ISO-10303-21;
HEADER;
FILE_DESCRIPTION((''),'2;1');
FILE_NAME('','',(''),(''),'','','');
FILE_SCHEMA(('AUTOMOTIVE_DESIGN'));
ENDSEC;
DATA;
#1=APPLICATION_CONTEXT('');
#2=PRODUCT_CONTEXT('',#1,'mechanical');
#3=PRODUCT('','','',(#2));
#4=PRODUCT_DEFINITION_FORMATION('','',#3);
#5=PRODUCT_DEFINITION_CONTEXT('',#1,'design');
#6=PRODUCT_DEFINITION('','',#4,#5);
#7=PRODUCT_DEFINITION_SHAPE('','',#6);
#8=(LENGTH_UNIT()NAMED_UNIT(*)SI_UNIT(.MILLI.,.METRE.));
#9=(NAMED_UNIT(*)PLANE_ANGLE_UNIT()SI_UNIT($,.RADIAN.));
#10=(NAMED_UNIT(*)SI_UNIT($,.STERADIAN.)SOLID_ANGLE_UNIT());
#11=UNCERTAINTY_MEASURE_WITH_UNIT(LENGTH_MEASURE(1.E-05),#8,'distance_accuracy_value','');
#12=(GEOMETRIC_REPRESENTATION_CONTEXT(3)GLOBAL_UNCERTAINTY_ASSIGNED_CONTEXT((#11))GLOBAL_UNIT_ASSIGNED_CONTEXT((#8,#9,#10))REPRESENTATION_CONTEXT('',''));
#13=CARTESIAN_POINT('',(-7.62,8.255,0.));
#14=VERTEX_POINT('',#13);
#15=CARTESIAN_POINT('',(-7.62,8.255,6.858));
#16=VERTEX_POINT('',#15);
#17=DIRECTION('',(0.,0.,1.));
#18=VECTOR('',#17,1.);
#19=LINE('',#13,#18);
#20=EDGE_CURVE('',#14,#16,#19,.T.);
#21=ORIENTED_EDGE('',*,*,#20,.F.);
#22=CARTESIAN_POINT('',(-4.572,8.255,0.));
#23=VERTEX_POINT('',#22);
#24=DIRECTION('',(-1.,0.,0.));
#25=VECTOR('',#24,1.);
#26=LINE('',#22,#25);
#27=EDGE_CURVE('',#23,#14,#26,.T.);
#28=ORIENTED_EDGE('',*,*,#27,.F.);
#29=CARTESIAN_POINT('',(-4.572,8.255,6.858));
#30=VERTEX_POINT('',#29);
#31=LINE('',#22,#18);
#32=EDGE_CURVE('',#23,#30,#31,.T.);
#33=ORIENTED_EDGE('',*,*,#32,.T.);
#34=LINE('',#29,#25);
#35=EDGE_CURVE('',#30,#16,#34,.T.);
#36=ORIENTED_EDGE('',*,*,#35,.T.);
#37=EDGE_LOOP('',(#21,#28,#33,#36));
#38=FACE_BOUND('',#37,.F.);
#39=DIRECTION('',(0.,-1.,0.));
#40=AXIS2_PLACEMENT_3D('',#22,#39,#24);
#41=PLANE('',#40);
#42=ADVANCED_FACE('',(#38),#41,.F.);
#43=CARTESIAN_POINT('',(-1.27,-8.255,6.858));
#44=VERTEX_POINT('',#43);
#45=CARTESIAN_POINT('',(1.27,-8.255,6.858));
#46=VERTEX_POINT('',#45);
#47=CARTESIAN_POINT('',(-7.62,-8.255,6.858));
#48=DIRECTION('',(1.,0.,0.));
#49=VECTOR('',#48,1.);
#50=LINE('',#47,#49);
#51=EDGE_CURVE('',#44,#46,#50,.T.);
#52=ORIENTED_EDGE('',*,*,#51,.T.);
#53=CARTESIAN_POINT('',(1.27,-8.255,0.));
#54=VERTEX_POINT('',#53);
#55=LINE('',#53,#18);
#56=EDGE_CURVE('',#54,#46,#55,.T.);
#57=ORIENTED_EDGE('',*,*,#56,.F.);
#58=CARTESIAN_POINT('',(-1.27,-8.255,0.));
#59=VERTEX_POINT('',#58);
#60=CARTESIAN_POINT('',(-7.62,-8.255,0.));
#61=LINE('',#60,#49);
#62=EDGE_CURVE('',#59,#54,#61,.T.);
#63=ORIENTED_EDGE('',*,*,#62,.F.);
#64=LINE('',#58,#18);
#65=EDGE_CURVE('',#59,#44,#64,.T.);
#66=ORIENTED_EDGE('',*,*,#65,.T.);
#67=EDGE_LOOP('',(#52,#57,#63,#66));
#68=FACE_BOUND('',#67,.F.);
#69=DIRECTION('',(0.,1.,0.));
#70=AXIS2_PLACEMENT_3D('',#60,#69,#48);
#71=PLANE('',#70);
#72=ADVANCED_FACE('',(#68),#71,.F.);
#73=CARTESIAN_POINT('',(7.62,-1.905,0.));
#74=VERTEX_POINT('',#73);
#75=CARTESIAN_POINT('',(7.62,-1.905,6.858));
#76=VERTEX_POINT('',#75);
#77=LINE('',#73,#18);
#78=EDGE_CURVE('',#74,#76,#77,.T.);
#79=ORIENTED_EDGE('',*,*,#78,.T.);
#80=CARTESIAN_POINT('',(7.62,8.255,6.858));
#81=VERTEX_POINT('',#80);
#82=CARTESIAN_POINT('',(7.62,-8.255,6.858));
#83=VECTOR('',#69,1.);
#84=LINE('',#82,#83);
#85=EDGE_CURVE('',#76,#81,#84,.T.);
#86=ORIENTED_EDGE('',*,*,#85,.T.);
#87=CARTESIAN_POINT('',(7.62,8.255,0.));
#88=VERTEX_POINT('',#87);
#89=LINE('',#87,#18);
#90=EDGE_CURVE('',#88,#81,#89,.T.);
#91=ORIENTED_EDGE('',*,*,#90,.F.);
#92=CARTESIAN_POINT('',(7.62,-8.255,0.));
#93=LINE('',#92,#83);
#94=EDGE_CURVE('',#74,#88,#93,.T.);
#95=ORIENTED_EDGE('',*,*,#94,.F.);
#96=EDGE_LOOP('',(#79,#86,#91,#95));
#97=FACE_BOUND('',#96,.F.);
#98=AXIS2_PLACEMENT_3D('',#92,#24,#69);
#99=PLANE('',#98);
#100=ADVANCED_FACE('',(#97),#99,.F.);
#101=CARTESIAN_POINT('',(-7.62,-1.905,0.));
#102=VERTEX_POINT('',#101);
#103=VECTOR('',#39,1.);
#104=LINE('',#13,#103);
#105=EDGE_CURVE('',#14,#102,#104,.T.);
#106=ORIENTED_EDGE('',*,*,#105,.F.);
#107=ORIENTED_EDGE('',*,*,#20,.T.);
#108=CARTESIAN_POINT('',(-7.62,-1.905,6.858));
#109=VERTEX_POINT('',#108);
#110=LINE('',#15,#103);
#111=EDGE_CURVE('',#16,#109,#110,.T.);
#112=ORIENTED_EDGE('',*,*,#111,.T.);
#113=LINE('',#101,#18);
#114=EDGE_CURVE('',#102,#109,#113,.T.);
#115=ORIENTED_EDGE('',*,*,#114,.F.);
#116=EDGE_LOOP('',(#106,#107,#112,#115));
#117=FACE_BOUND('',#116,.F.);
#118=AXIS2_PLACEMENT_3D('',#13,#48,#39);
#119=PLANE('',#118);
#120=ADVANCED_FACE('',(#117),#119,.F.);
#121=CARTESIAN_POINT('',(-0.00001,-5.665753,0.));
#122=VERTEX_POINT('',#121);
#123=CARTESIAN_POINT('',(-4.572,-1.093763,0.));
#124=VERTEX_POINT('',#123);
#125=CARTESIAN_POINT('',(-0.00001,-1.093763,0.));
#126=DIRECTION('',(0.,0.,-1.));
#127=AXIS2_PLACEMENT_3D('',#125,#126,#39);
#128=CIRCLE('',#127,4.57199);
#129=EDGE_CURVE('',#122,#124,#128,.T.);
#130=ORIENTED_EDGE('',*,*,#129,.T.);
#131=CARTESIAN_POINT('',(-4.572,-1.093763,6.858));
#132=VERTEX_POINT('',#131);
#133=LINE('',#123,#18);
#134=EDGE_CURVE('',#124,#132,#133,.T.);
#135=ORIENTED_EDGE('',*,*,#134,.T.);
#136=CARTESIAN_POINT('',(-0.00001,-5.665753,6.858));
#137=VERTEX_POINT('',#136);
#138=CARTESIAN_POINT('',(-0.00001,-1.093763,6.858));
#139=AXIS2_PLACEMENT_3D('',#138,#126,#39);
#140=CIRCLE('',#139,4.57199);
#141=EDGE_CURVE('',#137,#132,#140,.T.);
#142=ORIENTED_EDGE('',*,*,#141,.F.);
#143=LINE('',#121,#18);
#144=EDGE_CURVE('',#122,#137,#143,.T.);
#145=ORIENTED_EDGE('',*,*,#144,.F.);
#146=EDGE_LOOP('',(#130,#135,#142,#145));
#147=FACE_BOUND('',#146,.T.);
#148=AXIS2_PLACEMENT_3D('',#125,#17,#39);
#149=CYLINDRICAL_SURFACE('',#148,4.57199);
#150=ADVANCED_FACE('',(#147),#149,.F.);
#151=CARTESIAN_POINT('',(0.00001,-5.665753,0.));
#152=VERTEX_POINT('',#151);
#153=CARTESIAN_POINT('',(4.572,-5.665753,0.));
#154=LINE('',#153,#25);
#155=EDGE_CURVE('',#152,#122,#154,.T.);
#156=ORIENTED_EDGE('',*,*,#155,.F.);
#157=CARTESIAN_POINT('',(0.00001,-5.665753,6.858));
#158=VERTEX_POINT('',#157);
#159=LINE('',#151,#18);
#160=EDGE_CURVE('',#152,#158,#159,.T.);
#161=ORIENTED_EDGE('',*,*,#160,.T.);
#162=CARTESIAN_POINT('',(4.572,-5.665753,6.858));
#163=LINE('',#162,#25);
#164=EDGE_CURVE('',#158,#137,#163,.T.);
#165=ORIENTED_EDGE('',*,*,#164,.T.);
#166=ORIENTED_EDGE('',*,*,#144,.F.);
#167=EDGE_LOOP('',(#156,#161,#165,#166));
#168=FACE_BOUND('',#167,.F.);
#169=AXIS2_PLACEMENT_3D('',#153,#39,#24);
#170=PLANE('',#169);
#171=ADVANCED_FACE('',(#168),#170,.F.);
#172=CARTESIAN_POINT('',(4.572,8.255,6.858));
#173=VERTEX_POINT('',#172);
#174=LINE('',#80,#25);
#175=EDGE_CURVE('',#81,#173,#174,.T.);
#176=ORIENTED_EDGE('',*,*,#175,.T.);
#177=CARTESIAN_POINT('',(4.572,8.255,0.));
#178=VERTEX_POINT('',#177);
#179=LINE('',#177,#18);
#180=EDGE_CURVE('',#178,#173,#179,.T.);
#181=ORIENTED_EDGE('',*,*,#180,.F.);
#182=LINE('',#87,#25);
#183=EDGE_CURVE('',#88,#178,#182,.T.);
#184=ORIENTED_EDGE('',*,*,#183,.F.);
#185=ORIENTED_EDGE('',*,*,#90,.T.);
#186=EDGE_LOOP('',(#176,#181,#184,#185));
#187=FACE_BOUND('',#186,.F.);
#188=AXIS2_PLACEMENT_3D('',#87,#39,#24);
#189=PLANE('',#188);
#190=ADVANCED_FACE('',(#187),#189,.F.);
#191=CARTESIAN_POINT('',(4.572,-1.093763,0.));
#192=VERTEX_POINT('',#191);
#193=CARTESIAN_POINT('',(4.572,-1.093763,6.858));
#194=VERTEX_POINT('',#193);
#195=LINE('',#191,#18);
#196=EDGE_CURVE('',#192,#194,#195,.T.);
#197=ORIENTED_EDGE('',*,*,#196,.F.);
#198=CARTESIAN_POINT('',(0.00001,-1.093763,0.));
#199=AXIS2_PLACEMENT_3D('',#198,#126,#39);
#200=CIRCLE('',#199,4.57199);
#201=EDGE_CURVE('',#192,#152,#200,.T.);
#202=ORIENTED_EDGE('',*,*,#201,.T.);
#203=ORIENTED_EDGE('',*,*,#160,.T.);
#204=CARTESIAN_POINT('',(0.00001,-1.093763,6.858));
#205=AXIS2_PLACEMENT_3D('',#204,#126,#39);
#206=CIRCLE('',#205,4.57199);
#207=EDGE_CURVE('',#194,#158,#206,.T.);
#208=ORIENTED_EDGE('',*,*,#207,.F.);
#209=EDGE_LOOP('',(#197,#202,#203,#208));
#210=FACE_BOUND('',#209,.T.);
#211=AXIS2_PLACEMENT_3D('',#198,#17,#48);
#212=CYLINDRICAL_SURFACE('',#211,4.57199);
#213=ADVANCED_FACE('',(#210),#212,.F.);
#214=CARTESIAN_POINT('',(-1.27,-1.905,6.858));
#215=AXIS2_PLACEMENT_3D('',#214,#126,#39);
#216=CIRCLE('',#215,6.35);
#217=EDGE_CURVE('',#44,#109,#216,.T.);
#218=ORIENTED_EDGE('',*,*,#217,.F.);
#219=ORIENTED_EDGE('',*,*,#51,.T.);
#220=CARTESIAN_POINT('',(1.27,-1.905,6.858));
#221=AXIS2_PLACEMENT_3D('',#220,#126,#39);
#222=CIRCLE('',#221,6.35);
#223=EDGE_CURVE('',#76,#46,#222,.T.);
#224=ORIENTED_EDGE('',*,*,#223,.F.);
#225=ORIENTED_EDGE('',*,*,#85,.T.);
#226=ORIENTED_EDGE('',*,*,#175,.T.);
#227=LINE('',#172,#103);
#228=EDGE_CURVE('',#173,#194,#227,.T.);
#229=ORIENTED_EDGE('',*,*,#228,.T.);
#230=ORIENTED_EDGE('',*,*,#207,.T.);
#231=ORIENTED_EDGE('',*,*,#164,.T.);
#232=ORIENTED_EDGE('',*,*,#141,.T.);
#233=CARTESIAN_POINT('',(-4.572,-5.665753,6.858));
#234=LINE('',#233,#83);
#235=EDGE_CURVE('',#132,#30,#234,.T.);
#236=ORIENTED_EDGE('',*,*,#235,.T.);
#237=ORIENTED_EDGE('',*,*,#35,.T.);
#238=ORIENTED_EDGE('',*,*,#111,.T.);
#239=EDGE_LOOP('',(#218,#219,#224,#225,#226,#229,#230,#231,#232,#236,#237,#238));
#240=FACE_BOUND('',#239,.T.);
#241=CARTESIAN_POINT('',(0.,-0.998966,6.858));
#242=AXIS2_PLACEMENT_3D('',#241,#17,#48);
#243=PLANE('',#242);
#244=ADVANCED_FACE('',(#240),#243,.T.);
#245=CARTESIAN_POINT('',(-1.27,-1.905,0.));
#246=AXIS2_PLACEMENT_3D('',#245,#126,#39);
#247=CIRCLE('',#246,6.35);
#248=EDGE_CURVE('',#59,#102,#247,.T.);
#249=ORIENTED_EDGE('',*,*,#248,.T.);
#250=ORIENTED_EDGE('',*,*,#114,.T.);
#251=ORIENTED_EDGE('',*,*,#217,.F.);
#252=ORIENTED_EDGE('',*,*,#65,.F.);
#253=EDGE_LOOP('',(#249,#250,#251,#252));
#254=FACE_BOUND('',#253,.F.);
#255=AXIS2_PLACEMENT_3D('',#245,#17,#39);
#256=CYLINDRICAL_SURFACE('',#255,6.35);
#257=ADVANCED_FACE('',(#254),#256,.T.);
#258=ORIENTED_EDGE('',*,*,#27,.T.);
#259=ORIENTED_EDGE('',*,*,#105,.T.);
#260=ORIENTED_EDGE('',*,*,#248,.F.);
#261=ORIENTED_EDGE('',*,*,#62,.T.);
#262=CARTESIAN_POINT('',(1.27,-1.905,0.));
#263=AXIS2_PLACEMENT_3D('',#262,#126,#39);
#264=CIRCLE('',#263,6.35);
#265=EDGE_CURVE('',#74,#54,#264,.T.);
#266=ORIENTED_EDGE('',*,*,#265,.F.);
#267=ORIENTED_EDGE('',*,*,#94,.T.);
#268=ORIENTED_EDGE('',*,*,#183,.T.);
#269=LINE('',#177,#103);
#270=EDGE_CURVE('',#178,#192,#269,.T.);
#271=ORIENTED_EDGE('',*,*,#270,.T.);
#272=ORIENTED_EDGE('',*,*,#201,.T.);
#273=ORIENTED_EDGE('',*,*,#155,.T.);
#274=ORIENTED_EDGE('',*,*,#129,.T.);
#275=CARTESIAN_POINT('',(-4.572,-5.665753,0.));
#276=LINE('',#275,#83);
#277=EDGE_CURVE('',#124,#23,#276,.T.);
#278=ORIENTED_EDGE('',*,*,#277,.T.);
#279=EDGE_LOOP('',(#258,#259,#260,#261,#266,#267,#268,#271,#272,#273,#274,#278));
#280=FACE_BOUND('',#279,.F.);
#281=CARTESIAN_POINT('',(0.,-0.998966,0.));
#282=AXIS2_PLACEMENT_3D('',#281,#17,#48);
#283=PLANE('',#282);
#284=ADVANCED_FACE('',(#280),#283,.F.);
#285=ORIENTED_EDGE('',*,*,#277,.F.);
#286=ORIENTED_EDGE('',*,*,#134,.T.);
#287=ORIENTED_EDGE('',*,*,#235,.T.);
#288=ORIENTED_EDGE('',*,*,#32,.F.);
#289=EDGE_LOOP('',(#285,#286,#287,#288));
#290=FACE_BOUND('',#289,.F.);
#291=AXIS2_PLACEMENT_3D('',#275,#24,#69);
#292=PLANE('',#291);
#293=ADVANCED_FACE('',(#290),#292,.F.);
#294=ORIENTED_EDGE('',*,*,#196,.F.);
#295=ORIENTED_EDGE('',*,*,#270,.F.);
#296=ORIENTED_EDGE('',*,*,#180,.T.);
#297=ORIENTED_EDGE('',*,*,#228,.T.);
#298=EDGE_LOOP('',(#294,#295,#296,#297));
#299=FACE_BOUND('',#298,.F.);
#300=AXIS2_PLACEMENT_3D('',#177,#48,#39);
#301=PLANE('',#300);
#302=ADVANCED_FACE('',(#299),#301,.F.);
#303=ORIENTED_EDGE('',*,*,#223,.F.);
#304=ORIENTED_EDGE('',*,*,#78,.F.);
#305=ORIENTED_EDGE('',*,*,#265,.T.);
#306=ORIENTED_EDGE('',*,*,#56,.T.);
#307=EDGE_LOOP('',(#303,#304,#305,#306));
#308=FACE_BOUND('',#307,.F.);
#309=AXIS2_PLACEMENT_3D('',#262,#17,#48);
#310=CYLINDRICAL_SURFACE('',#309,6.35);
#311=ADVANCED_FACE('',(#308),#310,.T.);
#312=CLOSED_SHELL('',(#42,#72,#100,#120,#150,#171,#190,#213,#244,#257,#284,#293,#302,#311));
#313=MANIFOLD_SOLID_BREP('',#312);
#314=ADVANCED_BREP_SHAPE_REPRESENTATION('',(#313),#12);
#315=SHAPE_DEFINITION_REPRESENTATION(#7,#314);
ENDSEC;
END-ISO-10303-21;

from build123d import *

# Parameters (mm, degrees)
F1_DEPTH = 6.858
F2_R     = 4.57199
F3_R     = 6.35


# Not quite as in the source:
# - a fillet or chamfer is up to 0.001 mm smaller than in the source, because OpenCascade refuses the exact size


with BuildPart() as f1:
    # F0 (on Top) → F1 (new body)
    with BuildSketch(Plane.XY):
        Polygon((-7.62, -8.255), (7.62, -8.255), (7.62, 8.255), (4.572, 8.255), (4.572, -5.6657525711), (-4.572, -5.6657525711), (-4.572, 8.255), (-7.62, 8.255), align=None)
    extrude(amount=F1_DEPTH)

    # F2 (radius 4.572 in the source; OpenCascade refuses exactly that, so slightly less here)
    f2_edges = [f1.edges().sort_by_distance(p)[0] for p in [
        (-4.572, -5.665753, 3.429),
        (4.572, -5.665753, 3.429),
    ]]
    fillet(f2_edges, radius=F2_R)

    # F3
    f3_edges = [f1.edges().sort_by_distance(p)[0] for p in [
        (7.62, -8.255, 3.429),
        (-7.62, -8.255, 3.429),
    ]]
    fillet(f3_edges, radius=F3_R)


solid = f1.part
